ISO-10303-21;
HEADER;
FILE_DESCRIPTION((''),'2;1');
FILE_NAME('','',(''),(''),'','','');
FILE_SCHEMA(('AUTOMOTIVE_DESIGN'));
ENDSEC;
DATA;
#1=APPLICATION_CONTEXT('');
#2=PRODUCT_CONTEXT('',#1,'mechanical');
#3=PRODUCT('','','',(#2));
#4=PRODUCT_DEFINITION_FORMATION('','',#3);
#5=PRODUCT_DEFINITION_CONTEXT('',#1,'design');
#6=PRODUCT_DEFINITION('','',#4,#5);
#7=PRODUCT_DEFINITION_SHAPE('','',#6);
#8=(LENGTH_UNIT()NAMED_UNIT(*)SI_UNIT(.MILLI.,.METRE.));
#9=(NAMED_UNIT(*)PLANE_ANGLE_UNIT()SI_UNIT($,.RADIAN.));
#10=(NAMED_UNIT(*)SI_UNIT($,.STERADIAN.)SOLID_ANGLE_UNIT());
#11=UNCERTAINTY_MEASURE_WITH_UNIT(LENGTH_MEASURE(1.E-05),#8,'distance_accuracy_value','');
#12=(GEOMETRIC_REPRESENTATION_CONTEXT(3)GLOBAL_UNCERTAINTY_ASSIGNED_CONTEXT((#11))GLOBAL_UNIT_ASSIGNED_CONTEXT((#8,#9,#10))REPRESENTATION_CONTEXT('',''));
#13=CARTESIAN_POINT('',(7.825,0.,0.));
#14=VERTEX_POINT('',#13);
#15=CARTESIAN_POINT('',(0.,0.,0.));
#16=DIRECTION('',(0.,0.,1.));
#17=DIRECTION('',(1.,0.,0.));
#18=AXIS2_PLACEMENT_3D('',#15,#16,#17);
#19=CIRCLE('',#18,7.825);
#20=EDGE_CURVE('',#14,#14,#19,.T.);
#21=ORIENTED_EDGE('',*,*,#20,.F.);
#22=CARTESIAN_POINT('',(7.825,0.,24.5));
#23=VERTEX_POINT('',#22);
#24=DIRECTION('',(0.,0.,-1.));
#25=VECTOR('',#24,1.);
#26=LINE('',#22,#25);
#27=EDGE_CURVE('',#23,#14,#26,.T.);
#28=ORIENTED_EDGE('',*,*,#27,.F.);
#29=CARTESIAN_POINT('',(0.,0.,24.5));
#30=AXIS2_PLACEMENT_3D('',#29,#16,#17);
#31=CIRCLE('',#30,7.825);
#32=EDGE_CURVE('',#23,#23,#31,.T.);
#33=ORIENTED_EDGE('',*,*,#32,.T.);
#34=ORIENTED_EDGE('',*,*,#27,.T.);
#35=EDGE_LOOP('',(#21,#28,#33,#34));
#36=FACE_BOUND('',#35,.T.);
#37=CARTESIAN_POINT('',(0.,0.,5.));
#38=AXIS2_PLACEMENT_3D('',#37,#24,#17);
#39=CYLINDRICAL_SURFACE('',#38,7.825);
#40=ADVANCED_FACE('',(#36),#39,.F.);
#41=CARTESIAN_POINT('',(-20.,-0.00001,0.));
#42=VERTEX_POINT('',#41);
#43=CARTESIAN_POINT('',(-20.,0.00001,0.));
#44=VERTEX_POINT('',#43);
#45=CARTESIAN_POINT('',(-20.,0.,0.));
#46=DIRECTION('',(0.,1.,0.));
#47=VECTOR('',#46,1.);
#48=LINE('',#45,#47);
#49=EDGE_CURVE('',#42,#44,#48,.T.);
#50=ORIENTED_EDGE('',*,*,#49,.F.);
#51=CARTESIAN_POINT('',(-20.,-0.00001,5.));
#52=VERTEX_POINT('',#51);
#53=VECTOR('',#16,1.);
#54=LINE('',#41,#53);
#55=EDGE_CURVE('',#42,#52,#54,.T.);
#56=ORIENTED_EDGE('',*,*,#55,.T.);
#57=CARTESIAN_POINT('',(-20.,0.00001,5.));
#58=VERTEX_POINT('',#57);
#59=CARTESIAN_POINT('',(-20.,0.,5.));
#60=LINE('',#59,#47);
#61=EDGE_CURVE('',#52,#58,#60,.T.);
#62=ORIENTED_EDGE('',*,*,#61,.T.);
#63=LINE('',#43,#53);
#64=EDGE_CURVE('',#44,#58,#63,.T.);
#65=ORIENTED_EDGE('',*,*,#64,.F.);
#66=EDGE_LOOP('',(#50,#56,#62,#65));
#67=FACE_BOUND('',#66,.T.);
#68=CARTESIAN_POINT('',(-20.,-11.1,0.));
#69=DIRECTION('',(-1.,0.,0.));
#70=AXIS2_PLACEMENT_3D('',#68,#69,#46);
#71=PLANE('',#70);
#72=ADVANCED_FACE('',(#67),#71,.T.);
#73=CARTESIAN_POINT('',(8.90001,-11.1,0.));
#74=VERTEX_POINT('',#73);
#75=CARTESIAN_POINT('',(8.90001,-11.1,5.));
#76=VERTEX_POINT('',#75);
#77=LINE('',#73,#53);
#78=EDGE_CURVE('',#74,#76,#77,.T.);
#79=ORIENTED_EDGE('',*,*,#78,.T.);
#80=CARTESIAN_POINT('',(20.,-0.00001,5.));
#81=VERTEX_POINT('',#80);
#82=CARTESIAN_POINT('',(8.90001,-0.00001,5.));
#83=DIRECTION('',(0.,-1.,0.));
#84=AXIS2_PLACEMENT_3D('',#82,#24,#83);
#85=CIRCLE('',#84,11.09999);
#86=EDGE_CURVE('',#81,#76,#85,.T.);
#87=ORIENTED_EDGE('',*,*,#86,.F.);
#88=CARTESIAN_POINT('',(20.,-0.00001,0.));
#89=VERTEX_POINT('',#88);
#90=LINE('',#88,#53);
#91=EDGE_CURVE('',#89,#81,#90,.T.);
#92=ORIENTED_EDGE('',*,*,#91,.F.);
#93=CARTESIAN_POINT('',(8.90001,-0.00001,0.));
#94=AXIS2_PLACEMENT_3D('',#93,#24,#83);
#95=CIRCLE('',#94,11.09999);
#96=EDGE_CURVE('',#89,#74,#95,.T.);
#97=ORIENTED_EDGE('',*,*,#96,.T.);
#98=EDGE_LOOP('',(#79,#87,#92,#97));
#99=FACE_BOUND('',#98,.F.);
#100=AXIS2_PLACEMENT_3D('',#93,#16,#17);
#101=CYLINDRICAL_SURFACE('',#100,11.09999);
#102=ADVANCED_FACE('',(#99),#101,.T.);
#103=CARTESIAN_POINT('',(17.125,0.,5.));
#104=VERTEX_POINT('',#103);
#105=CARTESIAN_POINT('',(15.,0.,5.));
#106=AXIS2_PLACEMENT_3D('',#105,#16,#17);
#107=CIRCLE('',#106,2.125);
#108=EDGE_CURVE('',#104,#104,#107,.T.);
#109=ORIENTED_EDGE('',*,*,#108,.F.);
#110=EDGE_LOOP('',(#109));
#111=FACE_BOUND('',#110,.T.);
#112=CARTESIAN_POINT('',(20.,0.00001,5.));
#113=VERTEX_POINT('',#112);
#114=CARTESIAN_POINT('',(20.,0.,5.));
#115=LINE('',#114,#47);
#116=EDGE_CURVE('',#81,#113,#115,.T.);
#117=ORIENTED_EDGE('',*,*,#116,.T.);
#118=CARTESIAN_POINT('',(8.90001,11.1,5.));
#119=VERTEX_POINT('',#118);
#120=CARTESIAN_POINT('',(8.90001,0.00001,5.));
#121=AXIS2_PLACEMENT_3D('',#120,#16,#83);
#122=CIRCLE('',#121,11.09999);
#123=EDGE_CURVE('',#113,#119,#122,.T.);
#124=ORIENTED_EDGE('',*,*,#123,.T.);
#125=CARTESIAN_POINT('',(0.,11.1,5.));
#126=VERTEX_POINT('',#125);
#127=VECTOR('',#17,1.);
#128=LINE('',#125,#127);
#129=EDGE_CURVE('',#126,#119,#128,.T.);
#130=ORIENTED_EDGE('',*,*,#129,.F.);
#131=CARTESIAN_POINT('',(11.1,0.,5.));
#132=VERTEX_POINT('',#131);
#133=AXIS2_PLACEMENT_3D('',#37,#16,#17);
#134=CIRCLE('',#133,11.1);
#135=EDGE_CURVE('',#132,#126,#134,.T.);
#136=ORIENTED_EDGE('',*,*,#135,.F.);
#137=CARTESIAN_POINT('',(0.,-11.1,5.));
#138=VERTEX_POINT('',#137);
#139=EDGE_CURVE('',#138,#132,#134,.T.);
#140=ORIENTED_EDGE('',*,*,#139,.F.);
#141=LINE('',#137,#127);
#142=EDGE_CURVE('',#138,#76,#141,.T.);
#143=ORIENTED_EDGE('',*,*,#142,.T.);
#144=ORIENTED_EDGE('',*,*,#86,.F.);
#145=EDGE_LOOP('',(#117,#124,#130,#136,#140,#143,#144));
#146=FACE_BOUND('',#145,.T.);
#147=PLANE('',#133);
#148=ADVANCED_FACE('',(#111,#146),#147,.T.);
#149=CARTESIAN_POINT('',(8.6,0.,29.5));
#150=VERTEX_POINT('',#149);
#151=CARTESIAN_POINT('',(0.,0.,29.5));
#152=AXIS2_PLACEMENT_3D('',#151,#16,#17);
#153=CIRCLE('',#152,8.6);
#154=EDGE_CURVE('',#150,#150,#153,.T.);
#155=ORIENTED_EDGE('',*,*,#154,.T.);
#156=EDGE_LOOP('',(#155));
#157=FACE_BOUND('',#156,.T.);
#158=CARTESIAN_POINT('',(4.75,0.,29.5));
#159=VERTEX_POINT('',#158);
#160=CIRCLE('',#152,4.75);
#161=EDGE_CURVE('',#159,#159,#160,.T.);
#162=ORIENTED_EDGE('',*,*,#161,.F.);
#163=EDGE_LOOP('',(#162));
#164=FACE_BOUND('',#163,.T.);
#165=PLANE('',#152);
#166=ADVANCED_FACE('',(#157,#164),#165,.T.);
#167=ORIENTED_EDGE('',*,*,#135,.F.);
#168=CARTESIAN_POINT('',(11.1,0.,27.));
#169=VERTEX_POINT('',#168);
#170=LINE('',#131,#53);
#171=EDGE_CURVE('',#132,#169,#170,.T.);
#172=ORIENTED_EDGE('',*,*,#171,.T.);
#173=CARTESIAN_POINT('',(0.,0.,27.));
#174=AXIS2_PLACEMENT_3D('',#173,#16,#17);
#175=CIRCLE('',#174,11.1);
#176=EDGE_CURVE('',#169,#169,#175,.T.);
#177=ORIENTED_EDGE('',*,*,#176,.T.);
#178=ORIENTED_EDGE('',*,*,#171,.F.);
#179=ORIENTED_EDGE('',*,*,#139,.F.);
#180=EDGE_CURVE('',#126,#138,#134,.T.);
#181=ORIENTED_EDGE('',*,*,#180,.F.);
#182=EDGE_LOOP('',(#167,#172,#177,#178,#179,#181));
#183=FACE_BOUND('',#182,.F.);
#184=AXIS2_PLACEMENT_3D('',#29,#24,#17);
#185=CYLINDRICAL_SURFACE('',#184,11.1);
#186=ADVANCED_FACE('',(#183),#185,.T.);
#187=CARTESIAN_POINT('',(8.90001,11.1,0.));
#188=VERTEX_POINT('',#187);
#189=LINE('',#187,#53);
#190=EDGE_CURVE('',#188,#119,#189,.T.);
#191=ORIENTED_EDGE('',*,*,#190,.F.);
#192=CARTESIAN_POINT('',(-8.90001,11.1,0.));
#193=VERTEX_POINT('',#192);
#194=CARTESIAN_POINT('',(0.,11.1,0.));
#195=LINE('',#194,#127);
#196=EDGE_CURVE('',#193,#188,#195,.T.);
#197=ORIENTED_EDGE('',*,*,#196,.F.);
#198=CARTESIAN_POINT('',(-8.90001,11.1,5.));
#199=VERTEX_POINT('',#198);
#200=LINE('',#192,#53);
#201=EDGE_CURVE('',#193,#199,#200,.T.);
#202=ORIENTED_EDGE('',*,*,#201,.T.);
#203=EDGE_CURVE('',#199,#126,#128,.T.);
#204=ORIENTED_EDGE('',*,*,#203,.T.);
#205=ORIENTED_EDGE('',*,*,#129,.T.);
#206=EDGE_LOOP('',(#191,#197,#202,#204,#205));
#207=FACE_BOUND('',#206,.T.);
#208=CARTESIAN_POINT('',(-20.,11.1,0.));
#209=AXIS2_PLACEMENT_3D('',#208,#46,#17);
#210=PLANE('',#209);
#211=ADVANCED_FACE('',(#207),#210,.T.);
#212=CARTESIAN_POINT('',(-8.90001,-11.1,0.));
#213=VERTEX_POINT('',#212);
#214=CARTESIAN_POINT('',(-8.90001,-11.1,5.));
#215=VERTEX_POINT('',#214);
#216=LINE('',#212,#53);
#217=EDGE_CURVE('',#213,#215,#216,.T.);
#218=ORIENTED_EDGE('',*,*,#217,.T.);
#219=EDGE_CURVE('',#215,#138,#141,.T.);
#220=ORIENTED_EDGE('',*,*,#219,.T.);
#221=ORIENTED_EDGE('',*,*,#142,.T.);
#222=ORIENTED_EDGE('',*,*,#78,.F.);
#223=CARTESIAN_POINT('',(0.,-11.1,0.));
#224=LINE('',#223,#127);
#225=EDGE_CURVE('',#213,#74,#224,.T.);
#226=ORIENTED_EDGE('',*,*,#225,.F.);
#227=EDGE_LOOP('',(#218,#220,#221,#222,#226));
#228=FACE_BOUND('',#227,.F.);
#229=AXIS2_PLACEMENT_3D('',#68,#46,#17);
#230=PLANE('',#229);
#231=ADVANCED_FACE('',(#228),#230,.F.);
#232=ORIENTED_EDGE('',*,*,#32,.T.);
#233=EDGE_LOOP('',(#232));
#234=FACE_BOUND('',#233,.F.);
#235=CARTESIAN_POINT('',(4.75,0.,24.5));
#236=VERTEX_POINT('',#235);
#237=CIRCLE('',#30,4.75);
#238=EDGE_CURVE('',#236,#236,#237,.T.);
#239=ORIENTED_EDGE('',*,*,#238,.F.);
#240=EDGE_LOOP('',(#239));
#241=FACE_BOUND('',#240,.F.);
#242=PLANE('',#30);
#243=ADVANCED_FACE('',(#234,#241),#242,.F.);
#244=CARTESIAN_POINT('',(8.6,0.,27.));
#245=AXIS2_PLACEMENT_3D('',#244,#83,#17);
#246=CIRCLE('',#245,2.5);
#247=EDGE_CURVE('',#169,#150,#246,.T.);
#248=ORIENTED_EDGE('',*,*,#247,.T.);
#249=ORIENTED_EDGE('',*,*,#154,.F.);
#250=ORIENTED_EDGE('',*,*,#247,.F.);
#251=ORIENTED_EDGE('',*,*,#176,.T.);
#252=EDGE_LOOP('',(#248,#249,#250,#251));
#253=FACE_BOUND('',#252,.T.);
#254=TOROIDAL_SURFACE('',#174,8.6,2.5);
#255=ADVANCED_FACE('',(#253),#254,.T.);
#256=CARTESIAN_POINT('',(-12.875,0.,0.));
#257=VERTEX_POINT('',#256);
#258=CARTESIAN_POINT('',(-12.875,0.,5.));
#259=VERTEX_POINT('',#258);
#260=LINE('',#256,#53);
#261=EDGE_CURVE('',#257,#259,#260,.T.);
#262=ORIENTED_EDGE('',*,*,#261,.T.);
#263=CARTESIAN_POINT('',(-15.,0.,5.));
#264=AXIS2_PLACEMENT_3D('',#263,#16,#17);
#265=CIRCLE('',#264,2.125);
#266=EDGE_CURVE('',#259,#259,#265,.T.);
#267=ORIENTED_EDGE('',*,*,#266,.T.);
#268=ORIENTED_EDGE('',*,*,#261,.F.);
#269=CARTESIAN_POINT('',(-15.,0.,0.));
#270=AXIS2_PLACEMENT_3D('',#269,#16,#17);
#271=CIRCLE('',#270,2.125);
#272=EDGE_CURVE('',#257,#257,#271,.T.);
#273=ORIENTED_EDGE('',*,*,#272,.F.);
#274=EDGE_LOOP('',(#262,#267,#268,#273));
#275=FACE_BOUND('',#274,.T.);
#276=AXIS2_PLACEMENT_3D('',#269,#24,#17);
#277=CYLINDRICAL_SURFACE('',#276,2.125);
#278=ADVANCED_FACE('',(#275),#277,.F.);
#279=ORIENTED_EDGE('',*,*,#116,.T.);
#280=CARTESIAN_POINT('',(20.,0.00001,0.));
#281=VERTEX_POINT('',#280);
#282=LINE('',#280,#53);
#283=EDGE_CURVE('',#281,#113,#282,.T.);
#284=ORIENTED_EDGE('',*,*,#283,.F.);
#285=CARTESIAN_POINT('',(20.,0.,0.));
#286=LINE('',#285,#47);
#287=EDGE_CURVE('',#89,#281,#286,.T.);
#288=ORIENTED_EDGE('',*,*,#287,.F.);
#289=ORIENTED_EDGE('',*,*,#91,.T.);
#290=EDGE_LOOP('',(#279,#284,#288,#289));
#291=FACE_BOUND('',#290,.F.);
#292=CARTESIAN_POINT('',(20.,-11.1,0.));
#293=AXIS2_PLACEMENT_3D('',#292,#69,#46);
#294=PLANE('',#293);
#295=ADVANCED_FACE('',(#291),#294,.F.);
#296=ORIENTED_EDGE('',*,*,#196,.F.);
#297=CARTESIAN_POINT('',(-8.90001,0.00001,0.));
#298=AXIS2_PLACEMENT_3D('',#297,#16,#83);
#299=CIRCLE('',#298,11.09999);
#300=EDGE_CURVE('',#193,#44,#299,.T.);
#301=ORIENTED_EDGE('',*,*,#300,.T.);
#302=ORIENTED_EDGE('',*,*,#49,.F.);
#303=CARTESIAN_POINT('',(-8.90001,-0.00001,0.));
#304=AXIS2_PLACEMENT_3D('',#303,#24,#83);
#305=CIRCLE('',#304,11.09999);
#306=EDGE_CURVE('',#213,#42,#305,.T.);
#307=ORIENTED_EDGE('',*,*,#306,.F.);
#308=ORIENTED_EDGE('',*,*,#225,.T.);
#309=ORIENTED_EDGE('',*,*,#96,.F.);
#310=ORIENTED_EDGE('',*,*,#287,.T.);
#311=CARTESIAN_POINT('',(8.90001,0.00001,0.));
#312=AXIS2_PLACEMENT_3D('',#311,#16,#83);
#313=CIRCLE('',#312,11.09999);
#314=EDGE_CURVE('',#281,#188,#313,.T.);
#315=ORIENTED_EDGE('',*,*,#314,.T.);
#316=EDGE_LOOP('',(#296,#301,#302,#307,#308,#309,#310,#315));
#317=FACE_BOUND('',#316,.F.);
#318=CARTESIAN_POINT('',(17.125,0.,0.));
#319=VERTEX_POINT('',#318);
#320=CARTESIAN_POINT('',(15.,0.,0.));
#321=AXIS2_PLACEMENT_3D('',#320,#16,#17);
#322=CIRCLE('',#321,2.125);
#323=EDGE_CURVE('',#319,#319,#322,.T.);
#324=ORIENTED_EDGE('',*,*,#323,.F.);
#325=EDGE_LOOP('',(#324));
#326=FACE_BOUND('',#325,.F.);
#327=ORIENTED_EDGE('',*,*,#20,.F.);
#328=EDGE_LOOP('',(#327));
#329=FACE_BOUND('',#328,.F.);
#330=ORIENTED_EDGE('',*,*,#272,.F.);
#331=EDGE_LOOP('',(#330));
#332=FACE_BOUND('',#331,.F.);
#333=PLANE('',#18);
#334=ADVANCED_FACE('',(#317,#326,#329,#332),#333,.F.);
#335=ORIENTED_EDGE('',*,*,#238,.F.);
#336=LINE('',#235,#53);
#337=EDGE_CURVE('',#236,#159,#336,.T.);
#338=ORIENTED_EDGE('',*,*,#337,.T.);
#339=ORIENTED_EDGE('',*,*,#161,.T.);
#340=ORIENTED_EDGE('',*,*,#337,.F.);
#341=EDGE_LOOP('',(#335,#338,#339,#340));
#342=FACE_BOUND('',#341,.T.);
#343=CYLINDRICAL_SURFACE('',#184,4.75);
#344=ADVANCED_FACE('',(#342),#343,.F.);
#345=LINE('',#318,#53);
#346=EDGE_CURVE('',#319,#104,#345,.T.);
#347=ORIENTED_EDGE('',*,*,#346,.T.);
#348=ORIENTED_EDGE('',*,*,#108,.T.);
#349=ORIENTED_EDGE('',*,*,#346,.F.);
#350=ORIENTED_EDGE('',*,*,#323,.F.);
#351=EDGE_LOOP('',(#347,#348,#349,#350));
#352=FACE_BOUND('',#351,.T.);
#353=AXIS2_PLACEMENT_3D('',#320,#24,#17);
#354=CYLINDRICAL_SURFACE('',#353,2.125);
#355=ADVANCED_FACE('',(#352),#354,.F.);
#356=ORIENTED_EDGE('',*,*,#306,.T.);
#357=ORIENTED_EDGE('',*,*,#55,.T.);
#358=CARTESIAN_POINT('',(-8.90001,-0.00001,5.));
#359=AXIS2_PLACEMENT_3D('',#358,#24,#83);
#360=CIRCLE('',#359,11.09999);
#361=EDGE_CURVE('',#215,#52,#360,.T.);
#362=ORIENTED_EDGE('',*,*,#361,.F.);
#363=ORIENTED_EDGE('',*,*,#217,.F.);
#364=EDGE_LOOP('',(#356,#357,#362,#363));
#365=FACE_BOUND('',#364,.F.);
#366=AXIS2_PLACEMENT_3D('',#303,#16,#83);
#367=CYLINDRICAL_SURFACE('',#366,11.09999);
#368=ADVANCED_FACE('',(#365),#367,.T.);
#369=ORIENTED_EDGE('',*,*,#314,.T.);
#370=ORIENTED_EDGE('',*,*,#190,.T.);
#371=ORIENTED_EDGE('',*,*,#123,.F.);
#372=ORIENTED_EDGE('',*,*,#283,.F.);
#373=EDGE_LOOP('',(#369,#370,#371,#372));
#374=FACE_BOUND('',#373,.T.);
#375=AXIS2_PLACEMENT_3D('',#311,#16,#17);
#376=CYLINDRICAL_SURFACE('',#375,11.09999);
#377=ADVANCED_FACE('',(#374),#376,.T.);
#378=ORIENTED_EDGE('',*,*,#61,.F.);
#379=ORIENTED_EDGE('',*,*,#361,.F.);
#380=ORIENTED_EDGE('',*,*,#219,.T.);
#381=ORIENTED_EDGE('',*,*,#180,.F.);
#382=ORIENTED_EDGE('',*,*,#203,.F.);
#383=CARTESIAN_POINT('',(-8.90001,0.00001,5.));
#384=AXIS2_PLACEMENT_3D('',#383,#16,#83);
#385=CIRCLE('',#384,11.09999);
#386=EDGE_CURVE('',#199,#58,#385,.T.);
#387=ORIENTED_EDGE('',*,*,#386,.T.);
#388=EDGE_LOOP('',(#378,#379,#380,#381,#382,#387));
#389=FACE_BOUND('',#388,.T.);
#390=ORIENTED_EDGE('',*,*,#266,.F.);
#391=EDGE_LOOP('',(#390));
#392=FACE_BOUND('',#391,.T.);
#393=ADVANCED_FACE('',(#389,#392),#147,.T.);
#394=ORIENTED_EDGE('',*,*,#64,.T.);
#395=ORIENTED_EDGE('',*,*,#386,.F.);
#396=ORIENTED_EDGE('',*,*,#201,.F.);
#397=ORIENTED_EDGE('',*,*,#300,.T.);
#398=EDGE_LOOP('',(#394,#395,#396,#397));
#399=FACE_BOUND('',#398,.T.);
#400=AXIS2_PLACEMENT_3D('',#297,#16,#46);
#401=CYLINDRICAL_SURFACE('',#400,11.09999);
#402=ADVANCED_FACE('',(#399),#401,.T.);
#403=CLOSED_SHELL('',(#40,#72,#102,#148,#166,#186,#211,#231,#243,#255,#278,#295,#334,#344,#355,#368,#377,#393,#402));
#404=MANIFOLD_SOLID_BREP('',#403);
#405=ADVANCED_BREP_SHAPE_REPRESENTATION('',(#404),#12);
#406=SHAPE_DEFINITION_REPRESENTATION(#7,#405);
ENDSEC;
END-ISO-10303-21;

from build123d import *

# Parameters (mm, degrees)
F0_W     = 40
F0_H     = 22.2
F0_R     = 2.125
F0_R_2   = 7.825
F1_DEPTH = 5
F2_R     = 11.1
F2_R_2   = 7.825
F3_DEPTH = 19.5
F4_R     = 11.1
F4_R_2   = 4.75
F5_DEPTH = 5
F6_R     = 11.09999
F7_R     = 2.5


# Not quite as in the source:
# - a fillet or chamfer is up to 0.001 mm smaller than in the source, because OpenCascade refuses the exact size


with BuildPart() as f1:
    # F0 (on Top) → F1 (new body)
    with BuildSketch(Plane.XY):
        Rectangle(F0_W, F0_H)
        with Locations((-15, 0)):
            Circle(F0_R, mode=Mode.SUBTRACT)
        Circle(F0_R_2, mode=Mode.SUBTRACT)
        with Locations((15, 0)):
            Circle(F0_R, mode=Mode.SUBTRACT)
    extrude(amount=F1_DEPTH)

    # F2 (on face) → F3 (join)
    with BuildSketch(Plane.XY.offset(5)):
        Circle(F2_R)
        Circle(F2_R_2, mode=Mode.SUBTRACT)
    extrude(amount=F3_DEPTH)

    # F4 (on face) → F5 (join)
    with BuildSketch(Plane.XY.offset(24.5)):
        Circle(F4_R)
        Circle(F4_R_2, mode=Mode.SUBTRACT)
    extrude(amount=F5_DEPTH)

    # F6 (radius 11.1 in the source; OpenCascade refuses exactly that, so slightly less here)
    f6_edges = [f1.edges().sort_by_distance(p)[0] for p in [
        (-20, 11.1, 2.5),
        (-20, -11.1, 2.5),
        (20, -11.1, 2.5),
        (20, 11.1, 2.5),
    ]]
    fillet(f6_edges, radius=F6_R)

    # F7
    f7_edges = [f1.edges().sort_by_distance(p)[0] for p in [
        (-11.1, 0, 29.5),
    ]]
    fillet(f7_edges, radius=F7_R)


solid = f1.part
